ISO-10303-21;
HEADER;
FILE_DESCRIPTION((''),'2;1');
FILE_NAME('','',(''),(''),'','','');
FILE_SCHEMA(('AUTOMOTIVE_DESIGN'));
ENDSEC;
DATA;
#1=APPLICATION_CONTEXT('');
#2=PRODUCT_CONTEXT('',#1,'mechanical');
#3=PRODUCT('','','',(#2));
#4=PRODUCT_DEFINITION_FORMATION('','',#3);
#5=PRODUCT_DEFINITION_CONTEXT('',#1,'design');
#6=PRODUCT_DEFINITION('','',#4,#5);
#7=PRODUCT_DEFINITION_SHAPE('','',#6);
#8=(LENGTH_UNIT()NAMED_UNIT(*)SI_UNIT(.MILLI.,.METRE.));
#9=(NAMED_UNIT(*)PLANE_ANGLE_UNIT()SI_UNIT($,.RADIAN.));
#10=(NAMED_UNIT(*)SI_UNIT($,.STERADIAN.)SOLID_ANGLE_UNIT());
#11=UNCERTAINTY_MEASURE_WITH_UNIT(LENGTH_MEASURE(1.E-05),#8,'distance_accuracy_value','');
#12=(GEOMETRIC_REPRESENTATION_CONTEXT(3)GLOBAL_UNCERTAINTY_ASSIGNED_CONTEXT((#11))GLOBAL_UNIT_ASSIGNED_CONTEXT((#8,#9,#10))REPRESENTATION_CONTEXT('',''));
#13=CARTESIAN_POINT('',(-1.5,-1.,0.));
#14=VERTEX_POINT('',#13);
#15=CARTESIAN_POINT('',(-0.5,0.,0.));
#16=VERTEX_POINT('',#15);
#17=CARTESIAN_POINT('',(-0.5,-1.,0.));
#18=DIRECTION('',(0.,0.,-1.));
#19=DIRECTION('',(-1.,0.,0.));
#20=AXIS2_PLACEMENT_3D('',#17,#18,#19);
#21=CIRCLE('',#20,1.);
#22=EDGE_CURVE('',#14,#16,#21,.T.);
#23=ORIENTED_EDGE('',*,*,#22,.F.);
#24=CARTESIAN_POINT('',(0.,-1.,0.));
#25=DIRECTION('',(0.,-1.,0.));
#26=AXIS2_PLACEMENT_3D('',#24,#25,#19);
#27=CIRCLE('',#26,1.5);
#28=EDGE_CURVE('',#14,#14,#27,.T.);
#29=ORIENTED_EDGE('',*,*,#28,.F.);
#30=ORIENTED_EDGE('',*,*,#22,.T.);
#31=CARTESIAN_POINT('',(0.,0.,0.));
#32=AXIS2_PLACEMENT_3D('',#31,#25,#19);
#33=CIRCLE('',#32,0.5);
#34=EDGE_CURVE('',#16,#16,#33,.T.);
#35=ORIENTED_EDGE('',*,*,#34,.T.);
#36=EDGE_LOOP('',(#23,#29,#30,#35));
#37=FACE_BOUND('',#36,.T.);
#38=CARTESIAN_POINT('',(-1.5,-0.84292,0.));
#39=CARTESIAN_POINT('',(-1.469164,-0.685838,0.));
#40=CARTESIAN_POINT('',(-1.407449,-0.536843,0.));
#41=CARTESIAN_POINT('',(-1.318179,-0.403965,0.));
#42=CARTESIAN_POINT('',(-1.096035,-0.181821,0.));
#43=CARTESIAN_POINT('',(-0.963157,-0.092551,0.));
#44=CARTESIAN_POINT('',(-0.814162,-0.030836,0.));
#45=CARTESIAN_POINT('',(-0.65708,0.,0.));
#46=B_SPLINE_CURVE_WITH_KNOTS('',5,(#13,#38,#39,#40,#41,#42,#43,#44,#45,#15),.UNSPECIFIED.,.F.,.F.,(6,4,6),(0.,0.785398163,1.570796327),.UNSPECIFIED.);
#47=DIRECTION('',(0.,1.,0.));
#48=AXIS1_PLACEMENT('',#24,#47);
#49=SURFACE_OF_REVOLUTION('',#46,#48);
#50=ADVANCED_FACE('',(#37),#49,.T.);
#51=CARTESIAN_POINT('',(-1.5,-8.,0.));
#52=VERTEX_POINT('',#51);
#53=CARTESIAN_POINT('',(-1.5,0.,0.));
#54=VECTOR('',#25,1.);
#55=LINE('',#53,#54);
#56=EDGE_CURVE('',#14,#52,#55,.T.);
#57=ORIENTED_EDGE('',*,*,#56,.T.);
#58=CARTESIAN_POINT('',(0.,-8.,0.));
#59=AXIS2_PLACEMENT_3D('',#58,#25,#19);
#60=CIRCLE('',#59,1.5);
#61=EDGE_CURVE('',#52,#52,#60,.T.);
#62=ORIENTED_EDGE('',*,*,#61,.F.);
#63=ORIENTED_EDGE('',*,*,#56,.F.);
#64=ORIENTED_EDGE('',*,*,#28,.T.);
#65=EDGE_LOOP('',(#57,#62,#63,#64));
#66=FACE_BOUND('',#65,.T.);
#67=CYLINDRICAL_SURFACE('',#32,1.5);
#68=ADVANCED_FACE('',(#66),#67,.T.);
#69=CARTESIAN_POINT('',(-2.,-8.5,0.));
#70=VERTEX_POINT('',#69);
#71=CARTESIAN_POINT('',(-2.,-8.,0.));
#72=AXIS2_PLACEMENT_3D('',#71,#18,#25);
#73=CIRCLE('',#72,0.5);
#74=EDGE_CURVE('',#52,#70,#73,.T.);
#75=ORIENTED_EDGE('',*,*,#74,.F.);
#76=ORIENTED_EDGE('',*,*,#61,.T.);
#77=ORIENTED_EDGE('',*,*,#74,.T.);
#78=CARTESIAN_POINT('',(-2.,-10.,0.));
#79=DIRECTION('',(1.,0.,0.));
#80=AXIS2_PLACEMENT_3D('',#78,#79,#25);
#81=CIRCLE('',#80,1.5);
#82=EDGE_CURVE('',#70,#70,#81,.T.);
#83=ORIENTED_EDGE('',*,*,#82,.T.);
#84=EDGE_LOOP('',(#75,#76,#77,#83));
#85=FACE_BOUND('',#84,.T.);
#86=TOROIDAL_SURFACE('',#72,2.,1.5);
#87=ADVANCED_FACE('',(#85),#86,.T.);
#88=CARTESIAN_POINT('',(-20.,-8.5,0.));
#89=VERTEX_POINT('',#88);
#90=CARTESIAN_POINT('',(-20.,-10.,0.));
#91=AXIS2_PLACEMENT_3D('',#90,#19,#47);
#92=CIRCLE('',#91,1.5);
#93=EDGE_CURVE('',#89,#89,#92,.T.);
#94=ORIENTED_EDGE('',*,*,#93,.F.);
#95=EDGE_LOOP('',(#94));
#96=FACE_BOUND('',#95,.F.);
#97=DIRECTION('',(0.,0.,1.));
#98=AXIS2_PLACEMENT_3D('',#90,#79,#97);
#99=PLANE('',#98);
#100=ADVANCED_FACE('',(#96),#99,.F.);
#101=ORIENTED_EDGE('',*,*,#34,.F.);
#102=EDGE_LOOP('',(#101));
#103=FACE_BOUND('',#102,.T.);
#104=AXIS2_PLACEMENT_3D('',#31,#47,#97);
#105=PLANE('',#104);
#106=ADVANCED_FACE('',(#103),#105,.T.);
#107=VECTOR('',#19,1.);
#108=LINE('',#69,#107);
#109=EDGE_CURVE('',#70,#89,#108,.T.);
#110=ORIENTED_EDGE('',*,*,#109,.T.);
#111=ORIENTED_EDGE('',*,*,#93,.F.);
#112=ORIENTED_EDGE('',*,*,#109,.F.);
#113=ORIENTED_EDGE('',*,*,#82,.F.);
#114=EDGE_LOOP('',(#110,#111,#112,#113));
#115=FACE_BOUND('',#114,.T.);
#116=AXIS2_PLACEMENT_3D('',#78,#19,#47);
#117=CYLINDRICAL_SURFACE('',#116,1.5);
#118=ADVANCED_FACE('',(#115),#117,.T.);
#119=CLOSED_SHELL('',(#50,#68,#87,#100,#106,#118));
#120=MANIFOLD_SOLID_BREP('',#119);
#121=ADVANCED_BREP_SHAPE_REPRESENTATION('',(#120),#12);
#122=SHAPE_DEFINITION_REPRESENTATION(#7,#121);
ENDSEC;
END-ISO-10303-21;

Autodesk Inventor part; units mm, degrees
ref_plane "YZ Plane" through (0, 0, 0) normal (1, 0, 0) x (0, 1, 0)
ref_plane "XZ Plane" through (0, 0, 0) normal (0, 1, 0) x (-1, 0, 0)
ref_plane "XY Plane" through (0, 0, 0) normal (0, 0, 1) x (1, 0, 0)
sketch "Sketch1" plane through (0, 0, 0) normal (0, 0, 1) x (1, 0, 0)
  line L0 (0, 0) -> (0, -8)
  line L1 (-2, -10) -> (-20, -10)
  arc A0 (-2, -10) -> (0, -8) centre (-2, -8) ccw
  point P0 (0, -10)
  dimension "d0" = 10
  dimension "d1" = 20
  dimension "d2" = 2
sketch "Sketch2" plane through (0, 0, 0) normal (0, 1, 0) x (-1, 0, 0)
  circle A0 centre (0, 0) radius 1.5
  dimension "Diameter" = 3
sweep "Sweep1" add profiles "Sketch2" path "Sketch1"
thread "Thread1"
fillet "Fillet1" radius 1 1 edges at (1.5, 0, 0)
equation "\"Length\" = 35"
properties part number "Lock Handel" material "Mild Steel S355 J2"
